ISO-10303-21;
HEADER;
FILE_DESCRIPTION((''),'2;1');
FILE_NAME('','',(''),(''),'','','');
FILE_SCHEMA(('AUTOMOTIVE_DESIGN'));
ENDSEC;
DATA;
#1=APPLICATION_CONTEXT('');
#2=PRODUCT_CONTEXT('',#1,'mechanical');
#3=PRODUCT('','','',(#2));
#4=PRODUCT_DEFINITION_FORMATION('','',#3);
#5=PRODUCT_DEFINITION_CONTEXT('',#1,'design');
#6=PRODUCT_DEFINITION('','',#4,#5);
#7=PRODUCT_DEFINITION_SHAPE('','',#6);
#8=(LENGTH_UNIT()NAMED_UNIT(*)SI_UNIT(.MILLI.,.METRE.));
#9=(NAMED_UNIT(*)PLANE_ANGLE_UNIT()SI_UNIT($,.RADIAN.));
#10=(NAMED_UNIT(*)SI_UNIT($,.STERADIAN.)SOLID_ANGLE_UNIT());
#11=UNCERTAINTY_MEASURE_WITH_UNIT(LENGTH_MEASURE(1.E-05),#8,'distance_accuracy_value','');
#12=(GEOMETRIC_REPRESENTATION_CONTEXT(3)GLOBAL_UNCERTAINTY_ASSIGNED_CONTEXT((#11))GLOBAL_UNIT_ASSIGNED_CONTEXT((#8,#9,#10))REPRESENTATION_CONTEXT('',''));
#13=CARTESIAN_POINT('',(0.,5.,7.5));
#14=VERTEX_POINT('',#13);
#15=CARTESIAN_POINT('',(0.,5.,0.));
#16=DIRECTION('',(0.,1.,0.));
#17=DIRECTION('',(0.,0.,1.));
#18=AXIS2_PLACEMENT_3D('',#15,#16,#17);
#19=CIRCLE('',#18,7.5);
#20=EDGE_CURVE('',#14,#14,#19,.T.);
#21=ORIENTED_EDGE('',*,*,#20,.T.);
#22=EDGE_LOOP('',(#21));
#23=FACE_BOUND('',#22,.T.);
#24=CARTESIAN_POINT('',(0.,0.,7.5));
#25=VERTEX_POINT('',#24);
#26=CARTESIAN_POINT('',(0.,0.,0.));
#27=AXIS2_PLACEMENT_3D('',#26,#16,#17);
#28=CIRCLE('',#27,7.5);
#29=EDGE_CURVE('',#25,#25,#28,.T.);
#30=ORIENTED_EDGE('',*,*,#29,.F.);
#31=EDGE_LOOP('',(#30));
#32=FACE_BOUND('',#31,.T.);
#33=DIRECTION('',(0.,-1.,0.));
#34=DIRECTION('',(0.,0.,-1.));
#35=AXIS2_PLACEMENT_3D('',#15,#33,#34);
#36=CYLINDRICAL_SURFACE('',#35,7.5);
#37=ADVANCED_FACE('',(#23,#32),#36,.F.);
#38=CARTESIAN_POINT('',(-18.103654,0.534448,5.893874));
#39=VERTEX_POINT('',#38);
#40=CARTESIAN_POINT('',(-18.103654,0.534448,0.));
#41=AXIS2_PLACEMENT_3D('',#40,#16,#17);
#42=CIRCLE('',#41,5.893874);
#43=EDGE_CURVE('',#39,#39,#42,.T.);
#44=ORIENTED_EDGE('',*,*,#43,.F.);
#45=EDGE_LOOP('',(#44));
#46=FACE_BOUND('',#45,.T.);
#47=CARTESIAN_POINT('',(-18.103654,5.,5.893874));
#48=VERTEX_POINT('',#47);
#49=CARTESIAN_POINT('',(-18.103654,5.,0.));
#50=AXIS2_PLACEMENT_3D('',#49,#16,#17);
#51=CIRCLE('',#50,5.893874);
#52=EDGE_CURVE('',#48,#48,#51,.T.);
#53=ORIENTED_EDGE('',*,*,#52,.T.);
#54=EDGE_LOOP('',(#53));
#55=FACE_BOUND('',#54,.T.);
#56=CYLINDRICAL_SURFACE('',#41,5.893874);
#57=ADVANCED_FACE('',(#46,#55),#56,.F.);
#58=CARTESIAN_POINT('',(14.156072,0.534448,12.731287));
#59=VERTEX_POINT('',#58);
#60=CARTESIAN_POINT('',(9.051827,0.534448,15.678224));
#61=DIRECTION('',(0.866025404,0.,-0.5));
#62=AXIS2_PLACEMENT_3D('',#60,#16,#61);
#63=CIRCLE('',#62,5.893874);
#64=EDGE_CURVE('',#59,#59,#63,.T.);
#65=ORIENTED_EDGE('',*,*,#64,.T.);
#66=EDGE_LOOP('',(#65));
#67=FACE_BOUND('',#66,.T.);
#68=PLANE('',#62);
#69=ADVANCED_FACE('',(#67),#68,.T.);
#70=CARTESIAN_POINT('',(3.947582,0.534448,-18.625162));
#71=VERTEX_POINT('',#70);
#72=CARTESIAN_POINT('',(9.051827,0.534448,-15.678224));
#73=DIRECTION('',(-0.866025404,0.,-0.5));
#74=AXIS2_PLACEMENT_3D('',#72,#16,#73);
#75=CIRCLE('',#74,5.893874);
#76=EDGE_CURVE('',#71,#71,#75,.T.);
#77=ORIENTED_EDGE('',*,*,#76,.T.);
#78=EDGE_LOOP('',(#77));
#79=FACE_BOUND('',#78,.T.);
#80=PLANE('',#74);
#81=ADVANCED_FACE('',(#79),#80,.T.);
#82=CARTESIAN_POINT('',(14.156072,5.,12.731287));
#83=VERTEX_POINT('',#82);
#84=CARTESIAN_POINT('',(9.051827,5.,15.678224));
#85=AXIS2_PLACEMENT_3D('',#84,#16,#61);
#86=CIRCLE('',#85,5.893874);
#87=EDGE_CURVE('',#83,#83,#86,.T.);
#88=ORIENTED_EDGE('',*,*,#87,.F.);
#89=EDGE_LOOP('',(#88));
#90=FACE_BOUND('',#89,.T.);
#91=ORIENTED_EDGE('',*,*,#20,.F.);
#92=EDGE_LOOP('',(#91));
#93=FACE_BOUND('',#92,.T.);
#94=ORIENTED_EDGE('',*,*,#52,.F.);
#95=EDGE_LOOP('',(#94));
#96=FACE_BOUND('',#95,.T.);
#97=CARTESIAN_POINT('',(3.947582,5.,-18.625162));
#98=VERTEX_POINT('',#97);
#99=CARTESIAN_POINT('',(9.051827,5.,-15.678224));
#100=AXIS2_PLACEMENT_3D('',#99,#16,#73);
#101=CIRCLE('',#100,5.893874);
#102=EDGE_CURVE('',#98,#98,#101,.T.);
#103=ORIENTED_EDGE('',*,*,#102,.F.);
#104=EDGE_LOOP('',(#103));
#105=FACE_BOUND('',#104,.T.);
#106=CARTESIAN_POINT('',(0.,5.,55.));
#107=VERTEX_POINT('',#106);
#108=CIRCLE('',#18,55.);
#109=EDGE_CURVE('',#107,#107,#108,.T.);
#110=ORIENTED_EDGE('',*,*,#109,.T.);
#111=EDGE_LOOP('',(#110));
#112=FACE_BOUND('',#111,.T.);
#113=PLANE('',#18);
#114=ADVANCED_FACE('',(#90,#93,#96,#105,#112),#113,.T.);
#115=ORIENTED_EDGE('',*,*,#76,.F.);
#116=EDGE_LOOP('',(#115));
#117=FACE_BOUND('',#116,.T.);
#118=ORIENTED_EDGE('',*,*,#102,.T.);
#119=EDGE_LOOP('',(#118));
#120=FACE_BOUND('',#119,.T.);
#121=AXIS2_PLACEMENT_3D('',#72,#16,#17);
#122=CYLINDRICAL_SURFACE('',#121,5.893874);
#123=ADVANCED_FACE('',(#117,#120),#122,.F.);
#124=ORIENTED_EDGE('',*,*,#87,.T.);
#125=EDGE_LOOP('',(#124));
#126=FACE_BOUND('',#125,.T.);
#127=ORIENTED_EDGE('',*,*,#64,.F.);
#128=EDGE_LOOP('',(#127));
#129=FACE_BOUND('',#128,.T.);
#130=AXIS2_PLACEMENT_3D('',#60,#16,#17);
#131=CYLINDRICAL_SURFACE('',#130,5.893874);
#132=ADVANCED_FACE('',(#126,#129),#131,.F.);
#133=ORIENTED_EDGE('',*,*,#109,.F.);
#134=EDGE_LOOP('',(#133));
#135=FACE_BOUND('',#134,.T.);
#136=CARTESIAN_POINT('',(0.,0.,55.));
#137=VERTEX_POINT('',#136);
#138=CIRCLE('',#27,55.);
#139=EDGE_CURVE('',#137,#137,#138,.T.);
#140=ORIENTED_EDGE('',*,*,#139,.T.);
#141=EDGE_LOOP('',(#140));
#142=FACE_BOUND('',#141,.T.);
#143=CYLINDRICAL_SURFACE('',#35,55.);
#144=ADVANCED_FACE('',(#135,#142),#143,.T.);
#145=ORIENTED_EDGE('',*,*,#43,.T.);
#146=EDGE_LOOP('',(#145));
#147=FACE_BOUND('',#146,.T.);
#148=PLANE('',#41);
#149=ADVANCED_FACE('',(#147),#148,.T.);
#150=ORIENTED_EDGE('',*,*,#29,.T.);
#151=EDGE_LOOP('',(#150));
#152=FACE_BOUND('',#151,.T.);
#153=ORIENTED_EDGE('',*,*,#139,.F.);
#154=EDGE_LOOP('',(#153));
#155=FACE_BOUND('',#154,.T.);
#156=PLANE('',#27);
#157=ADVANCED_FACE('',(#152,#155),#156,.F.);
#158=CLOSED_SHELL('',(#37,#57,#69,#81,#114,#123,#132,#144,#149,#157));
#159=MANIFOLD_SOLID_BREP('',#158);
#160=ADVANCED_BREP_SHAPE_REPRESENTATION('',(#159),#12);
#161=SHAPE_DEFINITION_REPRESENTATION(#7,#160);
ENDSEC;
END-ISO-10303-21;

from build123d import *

# Parameters (mm, degrees)
SKETCH1_R           = 55
BOSS_EXTRUDE1_DEPTH = 5
SKETCH2_R           = 7.5
CUT_EXTRUDE1_DEPTH  = 78.942286341
SKETCH3_R           = 5.893874222
CUT_EXTRUDE2_DEPTH  = 4.465552073
CIRPATTERN1_COUNT   = 3


with BuildPart() as part:
    # Sketch1 → Boss-Extrude1 (new body)
    with BuildSketch(Plane(origin=(0, 0, 0), x_dir=(1, 0, 0), z_dir=(0, 1, 0))):
        Circle(SKETCH1_R)
    extrude(amount=BOSS_EXTRUDE1_DEPTH)

    # Sketch2 → Cut-Extrude1 (cut, through all)
    with BuildSketch(Plane(origin=(0, 0, 0), x_dir=(1, 0, 0), z_dir=(0, 1, 0))):
        Circle(SKETCH2_R)
    extrude(amount=CUT_EXTRUDE1_DEPTH, mode=Mode.SUBTRACT)

    # Sketch3 → Cut-Extrude2 (cut)
    with BuildSketch(Plane(origin=(0, 5, 0), x_dir=(1, 0, 0), z_dir=(0, 1, 0))):
        with Locations((-18.103654222, 0)):
            Circle(SKETCH3_R)
    cut_extrude2 = extrude(amount=-CUT_EXTRUDE2_DEPTH, mode=Mode.SUBTRACT)

    # CirPattern1: Cut-Extrude2 ×3 about axis
    cirpattern1_axis = Axis((0, 0, 0), (0, 1, 0))
    for i in range(1, CIRPATTERN1_COUNT):
        add(cut_extrude2.rotate(cirpattern1_axis, i * 360 / CIRPATTERN1_COUNT), mode=Mode.SUBTRACT)


solid = part.part
